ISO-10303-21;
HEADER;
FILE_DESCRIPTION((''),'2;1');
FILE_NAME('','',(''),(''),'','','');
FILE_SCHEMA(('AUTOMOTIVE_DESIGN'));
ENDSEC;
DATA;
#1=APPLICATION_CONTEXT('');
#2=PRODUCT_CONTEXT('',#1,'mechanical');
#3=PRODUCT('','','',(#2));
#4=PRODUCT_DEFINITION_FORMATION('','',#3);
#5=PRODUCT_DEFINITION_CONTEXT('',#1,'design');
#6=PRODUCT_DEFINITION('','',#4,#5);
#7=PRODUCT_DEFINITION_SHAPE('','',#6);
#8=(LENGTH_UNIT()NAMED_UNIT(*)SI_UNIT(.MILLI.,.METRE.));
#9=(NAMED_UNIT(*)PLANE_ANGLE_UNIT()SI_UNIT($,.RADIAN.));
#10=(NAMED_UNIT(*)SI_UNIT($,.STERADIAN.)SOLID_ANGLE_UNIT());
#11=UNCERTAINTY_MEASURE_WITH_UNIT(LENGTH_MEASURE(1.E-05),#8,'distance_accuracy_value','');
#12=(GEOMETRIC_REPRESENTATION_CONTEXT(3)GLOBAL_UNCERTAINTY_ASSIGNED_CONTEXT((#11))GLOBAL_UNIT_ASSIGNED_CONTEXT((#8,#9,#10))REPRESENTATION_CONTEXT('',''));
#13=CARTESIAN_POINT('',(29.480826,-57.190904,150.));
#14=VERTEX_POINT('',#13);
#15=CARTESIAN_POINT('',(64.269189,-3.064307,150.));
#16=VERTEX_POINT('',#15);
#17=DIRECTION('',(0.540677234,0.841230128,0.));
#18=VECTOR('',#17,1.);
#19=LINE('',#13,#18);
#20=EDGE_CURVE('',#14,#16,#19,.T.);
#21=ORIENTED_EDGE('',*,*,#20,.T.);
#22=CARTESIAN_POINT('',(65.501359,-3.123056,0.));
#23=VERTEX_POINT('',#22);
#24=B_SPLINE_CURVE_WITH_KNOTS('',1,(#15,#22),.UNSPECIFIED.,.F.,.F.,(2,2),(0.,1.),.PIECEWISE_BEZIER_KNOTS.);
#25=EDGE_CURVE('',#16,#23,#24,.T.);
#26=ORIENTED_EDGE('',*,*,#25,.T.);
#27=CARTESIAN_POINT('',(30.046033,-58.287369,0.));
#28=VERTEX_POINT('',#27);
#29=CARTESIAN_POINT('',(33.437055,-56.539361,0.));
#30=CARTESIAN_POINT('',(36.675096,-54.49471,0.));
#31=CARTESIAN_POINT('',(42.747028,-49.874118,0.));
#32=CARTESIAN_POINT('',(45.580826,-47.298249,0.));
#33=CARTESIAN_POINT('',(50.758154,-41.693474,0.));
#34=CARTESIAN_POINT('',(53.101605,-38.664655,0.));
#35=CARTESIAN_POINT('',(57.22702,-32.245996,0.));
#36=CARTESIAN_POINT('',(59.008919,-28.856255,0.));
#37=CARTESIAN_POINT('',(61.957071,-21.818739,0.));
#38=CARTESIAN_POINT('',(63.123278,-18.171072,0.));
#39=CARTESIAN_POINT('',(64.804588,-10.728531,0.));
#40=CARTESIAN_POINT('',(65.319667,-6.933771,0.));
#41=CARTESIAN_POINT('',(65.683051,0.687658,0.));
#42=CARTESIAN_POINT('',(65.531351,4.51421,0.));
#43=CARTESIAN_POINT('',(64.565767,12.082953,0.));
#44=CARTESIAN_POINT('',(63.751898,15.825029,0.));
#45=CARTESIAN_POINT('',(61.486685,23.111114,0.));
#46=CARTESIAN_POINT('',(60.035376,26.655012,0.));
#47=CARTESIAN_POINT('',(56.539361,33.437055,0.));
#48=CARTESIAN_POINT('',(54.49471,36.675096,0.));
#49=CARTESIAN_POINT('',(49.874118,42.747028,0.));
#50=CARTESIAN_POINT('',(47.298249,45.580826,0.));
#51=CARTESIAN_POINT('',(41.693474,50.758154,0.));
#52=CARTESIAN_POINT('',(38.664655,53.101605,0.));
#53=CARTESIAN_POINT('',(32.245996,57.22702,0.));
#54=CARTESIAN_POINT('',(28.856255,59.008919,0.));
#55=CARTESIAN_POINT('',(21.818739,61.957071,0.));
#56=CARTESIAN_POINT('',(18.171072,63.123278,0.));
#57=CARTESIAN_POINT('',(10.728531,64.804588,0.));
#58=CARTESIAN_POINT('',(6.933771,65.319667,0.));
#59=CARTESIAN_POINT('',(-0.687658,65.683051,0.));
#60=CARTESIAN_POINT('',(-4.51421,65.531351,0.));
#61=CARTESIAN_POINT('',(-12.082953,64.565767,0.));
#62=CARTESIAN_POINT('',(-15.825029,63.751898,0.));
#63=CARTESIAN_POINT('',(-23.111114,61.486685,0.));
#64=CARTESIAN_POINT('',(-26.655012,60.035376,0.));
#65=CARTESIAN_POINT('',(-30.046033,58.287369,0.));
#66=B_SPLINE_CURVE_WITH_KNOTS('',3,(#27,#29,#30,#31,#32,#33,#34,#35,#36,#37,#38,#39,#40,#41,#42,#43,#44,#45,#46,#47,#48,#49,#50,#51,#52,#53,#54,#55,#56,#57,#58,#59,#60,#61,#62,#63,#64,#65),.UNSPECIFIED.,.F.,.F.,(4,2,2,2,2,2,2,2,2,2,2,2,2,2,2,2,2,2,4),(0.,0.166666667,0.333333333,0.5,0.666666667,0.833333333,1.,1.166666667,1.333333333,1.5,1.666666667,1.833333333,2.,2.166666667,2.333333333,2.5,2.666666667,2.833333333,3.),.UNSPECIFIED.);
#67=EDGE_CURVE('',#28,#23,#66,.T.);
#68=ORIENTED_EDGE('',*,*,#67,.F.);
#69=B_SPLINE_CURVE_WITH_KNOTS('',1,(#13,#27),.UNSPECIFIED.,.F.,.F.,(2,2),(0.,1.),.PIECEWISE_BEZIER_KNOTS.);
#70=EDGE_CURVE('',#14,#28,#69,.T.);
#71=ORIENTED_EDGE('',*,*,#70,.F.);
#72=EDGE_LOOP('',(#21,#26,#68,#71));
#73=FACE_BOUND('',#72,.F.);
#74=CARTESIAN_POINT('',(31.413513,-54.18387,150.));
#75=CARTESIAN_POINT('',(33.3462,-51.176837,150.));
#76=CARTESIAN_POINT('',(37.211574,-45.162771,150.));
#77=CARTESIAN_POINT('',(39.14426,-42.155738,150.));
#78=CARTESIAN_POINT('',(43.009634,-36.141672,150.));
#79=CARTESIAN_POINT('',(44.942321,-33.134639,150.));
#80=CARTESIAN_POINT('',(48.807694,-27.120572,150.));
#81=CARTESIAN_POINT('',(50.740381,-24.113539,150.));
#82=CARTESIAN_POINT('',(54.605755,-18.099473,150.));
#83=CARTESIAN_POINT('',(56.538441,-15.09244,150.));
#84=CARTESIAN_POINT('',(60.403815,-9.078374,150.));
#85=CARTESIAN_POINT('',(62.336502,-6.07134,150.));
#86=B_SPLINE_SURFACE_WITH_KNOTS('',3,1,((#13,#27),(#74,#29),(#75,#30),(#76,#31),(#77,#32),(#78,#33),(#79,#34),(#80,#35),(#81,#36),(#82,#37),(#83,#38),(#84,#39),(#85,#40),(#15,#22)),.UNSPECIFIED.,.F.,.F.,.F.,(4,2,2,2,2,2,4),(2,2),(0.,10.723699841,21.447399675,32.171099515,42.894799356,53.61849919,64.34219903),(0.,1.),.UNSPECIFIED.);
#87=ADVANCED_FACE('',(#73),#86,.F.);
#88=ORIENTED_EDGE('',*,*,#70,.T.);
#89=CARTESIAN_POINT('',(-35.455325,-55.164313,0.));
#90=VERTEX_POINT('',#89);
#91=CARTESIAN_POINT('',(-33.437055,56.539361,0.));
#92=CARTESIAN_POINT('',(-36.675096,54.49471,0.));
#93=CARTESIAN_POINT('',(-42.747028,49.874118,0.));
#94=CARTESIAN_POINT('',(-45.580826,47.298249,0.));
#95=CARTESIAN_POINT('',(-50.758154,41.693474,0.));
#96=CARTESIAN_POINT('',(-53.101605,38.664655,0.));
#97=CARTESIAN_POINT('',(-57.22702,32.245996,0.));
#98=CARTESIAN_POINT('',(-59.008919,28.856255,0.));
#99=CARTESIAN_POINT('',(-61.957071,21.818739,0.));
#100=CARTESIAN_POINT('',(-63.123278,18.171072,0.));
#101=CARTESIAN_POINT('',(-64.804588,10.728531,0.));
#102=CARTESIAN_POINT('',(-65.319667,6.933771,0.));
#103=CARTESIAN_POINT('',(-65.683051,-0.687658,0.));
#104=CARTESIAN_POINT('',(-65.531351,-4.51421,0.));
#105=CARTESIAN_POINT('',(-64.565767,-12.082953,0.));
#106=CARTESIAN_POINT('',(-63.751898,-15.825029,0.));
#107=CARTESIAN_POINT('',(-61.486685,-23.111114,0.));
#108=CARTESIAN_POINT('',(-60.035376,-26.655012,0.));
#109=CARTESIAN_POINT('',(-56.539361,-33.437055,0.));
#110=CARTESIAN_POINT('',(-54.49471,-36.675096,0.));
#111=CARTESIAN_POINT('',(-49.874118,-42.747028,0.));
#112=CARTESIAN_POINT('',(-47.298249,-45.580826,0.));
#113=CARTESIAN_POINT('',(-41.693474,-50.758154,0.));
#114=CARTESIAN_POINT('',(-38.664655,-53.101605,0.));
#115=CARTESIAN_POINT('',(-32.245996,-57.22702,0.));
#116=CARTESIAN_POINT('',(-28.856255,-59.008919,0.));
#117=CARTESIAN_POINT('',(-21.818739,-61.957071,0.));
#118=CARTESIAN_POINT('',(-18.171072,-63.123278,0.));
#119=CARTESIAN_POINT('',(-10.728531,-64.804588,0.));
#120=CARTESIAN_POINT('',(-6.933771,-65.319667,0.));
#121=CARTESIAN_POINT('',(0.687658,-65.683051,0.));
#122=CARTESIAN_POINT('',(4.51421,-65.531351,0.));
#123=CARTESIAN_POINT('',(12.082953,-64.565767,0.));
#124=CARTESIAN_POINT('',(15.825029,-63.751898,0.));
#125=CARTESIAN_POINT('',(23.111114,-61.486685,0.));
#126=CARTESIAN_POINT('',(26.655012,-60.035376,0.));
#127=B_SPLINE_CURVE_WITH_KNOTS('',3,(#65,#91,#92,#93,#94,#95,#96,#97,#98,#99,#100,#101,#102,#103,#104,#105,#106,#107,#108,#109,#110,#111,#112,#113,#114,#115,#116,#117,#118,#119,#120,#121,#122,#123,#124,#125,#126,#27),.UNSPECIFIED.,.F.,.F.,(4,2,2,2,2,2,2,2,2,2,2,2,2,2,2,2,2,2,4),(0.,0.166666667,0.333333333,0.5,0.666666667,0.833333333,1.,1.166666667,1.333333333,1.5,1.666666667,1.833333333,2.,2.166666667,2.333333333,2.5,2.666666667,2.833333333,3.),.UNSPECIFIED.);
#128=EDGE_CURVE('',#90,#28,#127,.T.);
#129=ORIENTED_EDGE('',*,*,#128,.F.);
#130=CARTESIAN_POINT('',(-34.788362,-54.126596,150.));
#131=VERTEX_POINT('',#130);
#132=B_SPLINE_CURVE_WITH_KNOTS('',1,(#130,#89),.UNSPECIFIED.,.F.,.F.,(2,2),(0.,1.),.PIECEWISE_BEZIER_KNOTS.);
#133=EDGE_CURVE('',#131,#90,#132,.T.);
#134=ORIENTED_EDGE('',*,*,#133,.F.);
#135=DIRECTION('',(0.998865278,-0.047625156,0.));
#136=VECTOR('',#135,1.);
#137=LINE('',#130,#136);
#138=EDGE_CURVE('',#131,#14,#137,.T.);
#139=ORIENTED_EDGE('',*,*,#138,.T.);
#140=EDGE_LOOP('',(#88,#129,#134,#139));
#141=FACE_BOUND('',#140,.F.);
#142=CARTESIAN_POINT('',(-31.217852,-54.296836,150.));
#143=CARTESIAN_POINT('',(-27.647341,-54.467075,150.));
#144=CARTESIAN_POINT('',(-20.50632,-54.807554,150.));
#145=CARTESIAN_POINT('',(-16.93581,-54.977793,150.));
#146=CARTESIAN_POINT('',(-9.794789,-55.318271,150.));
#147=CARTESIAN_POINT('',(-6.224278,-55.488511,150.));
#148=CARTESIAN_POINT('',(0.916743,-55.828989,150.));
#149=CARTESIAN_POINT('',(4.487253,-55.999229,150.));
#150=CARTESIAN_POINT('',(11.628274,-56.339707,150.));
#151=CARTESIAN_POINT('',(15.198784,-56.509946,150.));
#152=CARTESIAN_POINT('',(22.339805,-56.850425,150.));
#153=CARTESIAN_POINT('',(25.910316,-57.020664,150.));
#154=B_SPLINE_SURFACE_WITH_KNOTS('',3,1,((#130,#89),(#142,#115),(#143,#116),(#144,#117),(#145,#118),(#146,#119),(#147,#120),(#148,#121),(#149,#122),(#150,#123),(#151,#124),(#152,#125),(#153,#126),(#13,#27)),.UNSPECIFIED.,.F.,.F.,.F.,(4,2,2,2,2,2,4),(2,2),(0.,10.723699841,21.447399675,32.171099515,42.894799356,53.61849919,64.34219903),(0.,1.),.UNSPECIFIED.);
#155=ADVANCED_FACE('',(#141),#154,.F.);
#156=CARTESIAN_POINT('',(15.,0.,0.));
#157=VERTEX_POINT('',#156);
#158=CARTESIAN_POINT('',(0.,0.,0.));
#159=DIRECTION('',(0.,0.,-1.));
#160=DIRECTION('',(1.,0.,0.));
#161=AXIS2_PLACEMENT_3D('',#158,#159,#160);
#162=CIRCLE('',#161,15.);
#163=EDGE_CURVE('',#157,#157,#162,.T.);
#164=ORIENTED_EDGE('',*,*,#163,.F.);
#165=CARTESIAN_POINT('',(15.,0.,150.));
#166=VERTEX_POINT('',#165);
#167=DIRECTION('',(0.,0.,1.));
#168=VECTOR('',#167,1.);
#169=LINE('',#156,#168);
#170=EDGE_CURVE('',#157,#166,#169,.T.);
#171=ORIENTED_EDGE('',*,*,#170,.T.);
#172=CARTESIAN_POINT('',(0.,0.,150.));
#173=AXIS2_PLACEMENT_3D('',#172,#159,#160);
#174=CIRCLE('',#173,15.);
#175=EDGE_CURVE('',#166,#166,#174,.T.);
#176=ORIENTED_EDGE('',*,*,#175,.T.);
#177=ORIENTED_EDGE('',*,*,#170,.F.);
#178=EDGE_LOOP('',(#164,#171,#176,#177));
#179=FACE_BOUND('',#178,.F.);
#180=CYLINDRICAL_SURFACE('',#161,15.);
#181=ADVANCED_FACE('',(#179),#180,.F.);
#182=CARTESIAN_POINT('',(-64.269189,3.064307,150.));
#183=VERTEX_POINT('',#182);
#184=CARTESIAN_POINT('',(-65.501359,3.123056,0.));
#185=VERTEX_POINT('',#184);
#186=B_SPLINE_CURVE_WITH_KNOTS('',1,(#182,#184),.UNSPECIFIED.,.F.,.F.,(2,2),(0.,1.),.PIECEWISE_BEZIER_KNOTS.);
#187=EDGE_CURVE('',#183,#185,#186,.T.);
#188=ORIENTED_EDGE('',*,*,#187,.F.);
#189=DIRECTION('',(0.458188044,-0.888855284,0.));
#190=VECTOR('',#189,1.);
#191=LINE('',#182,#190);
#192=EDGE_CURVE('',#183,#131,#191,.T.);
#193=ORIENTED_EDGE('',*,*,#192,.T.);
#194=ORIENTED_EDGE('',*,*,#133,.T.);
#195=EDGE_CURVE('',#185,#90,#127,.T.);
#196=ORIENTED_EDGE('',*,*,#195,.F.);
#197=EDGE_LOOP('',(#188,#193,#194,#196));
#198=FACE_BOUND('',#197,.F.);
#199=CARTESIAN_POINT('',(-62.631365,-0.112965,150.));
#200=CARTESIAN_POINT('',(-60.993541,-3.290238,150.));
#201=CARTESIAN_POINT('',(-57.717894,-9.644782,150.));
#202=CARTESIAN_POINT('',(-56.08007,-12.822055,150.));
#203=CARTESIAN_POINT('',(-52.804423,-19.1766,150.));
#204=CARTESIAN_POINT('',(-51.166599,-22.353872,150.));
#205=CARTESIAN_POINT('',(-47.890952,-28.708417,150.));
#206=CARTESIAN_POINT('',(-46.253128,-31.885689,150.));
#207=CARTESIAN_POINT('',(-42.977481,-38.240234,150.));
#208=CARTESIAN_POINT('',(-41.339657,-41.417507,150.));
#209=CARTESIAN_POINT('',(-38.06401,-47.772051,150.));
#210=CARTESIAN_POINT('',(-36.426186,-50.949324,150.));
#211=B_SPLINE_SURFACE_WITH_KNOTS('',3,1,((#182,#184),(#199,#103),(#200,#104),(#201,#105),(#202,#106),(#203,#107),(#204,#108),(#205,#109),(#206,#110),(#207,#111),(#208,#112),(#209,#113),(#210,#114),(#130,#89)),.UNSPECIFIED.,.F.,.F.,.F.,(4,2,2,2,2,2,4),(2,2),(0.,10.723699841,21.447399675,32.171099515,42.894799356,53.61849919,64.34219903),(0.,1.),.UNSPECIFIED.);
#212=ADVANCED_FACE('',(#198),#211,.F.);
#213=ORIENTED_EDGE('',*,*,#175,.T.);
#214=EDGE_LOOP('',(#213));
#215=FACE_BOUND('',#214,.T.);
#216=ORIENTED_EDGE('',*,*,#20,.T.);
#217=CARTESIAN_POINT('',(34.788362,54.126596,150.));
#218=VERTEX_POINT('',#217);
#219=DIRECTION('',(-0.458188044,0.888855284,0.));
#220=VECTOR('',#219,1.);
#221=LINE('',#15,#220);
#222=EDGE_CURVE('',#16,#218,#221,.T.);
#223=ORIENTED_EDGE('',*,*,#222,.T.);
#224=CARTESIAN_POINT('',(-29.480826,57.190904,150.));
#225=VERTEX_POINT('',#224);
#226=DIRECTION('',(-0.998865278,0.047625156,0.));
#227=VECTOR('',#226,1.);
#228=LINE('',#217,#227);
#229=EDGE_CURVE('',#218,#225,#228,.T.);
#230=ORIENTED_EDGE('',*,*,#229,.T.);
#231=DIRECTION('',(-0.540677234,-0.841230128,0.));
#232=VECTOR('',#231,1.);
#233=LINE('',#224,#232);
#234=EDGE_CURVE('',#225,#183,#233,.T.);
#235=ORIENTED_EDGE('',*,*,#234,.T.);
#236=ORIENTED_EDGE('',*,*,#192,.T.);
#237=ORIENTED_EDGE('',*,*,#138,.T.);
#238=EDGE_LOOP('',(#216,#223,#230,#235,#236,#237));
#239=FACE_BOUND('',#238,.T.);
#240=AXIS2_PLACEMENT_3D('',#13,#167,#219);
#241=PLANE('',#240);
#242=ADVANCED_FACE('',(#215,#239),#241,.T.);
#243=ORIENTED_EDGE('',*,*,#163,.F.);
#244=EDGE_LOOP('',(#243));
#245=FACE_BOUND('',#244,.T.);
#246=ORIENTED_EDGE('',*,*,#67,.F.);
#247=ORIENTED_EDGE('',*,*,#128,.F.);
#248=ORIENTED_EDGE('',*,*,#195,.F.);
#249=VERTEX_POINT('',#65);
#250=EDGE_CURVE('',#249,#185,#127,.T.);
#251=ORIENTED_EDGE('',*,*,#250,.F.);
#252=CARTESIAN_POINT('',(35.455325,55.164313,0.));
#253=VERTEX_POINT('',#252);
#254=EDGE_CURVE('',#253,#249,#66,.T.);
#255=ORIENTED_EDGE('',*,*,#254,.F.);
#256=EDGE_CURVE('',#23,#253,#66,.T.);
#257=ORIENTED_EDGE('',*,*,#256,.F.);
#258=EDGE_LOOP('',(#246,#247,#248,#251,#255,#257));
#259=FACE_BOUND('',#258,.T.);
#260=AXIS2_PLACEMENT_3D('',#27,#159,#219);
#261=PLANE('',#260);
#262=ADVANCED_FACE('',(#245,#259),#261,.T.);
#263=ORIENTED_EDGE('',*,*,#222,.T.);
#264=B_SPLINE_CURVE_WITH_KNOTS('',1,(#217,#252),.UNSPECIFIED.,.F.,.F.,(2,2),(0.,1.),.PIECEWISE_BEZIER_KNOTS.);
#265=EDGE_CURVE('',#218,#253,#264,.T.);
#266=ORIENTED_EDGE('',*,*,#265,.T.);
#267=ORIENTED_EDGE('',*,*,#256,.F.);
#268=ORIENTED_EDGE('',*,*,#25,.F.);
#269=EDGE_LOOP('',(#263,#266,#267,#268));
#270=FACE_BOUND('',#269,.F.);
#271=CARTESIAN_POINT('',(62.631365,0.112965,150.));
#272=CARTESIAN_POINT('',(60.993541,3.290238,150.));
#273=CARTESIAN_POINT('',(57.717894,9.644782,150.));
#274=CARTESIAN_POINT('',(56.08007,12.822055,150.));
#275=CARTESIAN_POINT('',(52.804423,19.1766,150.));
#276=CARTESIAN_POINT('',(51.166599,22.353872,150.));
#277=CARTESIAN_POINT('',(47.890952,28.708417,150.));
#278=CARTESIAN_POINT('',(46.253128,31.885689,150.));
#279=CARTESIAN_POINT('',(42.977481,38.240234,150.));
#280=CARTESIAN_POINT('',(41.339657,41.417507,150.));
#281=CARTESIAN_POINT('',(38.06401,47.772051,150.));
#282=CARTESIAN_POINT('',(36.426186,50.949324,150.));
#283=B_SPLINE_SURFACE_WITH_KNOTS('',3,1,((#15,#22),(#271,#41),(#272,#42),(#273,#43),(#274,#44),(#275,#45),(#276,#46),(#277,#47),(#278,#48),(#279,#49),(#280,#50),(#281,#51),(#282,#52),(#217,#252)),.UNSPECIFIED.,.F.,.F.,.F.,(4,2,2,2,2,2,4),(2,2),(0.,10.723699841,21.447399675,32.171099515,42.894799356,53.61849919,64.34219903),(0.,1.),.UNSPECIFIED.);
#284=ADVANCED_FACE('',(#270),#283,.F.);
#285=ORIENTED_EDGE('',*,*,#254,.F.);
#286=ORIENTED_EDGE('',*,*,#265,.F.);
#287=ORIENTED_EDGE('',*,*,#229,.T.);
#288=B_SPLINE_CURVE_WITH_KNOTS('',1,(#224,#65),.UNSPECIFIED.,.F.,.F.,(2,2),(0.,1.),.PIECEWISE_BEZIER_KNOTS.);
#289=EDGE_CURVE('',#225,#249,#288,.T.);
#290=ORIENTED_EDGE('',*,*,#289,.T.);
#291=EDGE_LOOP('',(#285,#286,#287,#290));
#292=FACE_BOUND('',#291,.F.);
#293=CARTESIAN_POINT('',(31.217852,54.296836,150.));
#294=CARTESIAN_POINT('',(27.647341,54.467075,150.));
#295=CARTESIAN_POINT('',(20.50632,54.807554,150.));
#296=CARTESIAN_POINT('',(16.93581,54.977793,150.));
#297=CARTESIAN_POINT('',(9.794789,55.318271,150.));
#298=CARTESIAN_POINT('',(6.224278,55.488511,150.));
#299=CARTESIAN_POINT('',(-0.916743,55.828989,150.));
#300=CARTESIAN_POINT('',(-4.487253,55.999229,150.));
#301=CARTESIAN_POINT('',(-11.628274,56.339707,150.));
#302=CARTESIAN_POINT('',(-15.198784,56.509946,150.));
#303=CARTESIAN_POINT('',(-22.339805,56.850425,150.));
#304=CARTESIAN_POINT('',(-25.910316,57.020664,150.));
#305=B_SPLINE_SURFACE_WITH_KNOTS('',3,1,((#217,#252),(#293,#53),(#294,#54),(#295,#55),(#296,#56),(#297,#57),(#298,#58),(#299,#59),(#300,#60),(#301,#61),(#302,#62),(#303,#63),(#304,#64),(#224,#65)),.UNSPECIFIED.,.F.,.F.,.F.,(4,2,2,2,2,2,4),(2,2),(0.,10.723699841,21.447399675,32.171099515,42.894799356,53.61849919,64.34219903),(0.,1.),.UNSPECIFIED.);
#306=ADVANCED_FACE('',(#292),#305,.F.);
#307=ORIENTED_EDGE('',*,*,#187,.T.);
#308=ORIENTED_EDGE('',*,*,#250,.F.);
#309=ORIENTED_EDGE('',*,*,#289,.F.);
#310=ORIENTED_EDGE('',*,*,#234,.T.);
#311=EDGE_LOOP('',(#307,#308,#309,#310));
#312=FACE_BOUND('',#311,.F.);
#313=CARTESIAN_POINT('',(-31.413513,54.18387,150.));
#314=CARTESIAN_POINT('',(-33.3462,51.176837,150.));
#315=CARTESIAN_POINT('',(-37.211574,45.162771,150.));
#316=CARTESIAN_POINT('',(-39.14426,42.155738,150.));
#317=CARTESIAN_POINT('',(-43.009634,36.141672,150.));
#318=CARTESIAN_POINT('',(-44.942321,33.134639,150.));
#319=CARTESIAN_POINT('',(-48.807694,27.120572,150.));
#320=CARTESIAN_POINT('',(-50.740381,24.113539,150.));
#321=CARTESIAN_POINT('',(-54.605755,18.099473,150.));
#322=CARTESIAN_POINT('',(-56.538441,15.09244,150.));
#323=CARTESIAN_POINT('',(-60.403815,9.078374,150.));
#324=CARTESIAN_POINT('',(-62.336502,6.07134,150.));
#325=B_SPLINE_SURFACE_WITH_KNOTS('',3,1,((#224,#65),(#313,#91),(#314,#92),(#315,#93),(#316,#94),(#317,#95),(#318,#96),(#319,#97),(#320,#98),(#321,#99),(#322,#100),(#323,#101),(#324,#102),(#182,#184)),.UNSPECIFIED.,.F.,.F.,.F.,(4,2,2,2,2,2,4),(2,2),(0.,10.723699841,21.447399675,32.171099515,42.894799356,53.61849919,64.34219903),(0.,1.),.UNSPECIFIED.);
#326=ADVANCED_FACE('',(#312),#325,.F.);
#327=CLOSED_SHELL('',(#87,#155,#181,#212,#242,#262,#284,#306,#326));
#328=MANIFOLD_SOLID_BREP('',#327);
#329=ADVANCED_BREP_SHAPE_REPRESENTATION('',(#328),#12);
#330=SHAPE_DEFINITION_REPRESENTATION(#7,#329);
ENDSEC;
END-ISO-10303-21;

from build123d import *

# Parameters (mm, degrees)
F4_R     = 15
F5_DEPTH = 208


# Not quite as in the source:
# - the arcs of a loft's sections are written as splines that run evenly, so that the points pair up as in the source's solid


with BuildPart() as f3:
    # F2 (on offset) → F3 section 0
    with BuildSketch(Plane.XY.offset(150)):
        Polygon((29.4808263494, -57.1909035932), (64.2691885518, -3.0643072535), (34.7883622024, 54.1265963397), (-29.4808263494, 57.1909035932), (-64.2691885518, 3.0643072535), (-34.7883622024, -54.1265963397), align=None)
    # F1 (on Top) → F3 section 1
    with BuildSketch(Plane.XY):
        with BuildLine():
            add(Edge.make_bspline(
                [(30.0460333415, -58.2873687402), (33.4370549976, -56.5393613769), (36.6750958203, -54.4947096368), (42.7470280691, -49.8741177675), (45.5808257272, -47.2982489935), (50.7581543238, -41.6934743272), (53.1016053094, -38.6646549886), (57.2270197442, -32.2459957674), (59.008919485, -28.8562550072), (61.9570711279, -21.8187389434), (63.123277502, -18.1710723193), (64.8045882572, -10.7285307775), (65.319666674, -6.933770794), (65.5013587195, -3.1230562134)],
                knots=[0, 0, 0, 0, 0.1666666667, 0.1666666667, 0.3333333333, 0.3333333333, 0.5, 0.5, 0.6666666667, 0.6666666667, 0.8333333333, 0.8333333333, 1, 1, 1, 1], degree=3))
            add(Edge.make_bspline(
                [(65.5013587195, -3.1230562134), (65.683050765, 0.6876583672), (65.5313508275, 4.5142098482), (64.5657670125, 12.0829533604), (63.7518980465, 15.8250285085), (61.4866851013, 23.11111393), (60.0353761034, 26.6550116854), (56.5393613769, 33.4370549976), (54.4947096368, 36.6750958203), (49.8741177675, 42.7470280691), (47.2982489935, 45.5808257272), (41.6934743272, 50.7581543238), (38.6646549886, 53.1016053094), (35.455325378, 55.1643125268)],
                knots=[0, 0, 0, 0, 0.1666666667, 0.1666666667, 0.3333333333, 0.3333333333, 0.5, 0.5, 0.6666666667, 0.6666666667, 0.8333333333, 0.8333333333, 1, 1, 1, 1], degree=3))
            add(Edge.make_bspline(
                [(35.455325378, 55.1643125268), (32.2459957674, 57.2270197442), (28.8562550072, 59.008919485), (21.8187389434, 61.9570711279), (18.1710723193, 63.123277502), (10.7285307775, 64.8045882572), (6.933770794, 65.319666674), (-0.6876583672, 65.683050765), (-4.5142098482, 65.5313508275), (-12.0829533604, 64.5657670125), (-15.8250285085, 63.7518980465), (-23.11111393, 61.4866851013), (-26.6550116854, 60.0353761034), (-30.0460333415, 58.2873687402)],
                knots=[0, 0, 0, 0, 0.1666666667, 0.1666666667, 0.3333333333, 0.3333333333, 0.5, 0.5, 0.6666666667, 0.6666666667, 0.8333333333, 0.8333333333, 1, 1, 1, 1], degree=3))
            add(Edge.make_bspline(
                [(-30.0460333415, 58.2873687402), (-33.4370549976, 56.5393613769), (-36.6750958203, 54.4947096368), (-42.7470280691, 49.8741177675), (-45.5808257272, 47.2982489935), (-50.7581543238, 41.6934743272), (-53.1016053094, 38.6646549886), (-57.2270197442, 32.2459957674), (-59.008919485, 28.8562550072), (-61.9570711279, 21.8187389434), (-63.123277502, 18.1710723193), (-64.8045882572, 10.7285307775), (-65.319666674, 6.933770794), (-65.5013587195, 3.1230562134)],
                knots=[0, 0, 0, 0, 0.1666666667, 0.1666666667, 0.3333333333, 0.3333333333, 0.5, 0.5, 0.6666666667, 0.6666666667, 0.8333333333, 0.8333333333, 1, 1, 1, 1], degree=3))
            add(Edge.make_bspline(
                [(-65.5013587195, 3.1230562134), (-65.683050765, -0.6876583672), (-65.5313508275, -4.5142098482), (-64.5657670125, -12.0829533604), (-63.7518980465, -15.8250285085), (-61.4866851013, -23.11111393), (-60.0353761034, -26.6550116854), (-56.5393613769, -33.4370549976), (-54.4947096368, -36.6750958203), (-49.8741177675, -42.7470280691), (-47.2982489935, -45.5808257272), (-41.6934743272, -50.7581543238), (-38.6646549886, -53.1016053094), (-35.455325378, -55.1643125268)],
                knots=[0, 0, 0, 0, 0.1666666667, 0.1666666667, 0.3333333333, 0.3333333333, 0.5, 0.5, 0.6666666667, 0.6666666667, 0.8333333333, 0.8333333333, 1, 1, 1, 1], degree=3))
            add(Edge.make_bspline(
                [(-35.455325378, -55.1643125268), (-32.2459957674, -57.2270197442), (-28.8562550072, -59.008919485), (-21.8187389434, -61.9570711279), (-18.1710723193, -63.123277502), (-10.7285307775, -64.8045882572), (-6.933770794, -65.319666674), (0.6876583672, -65.683050765), (4.5142098482, -65.5313508275), (12.0829533604, -64.5657670125), (15.8250285085, -63.7518980465), (23.11111393, -61.4866851013), (26.6550116854, -60.0353761034), (30.0460333415, -58.2873687402)],
                knots=[0, 0, 0, 0, 0.1666666667, 0.1666666667, 0.3333333333, 0.3333333333, 0.5, 0.5, 0.6666666667, 0.6666666667, 0.8333333333, 0.8333333333, 1, 1, 1, 1], degree=3))
        make_face()
    loft(ruled=True)

    # F4 (on face) → F5 (cut)
    with BuildSketch(Plane(origin=(0, 0, 0), x_dir=(1, 0, 0), z_dir=(0, 0, -1))):
        Circle(F4_R)
    extrude(amount=-F5_DEPTH, mode=Mode.SUBTRACT)


solid = f3.part
